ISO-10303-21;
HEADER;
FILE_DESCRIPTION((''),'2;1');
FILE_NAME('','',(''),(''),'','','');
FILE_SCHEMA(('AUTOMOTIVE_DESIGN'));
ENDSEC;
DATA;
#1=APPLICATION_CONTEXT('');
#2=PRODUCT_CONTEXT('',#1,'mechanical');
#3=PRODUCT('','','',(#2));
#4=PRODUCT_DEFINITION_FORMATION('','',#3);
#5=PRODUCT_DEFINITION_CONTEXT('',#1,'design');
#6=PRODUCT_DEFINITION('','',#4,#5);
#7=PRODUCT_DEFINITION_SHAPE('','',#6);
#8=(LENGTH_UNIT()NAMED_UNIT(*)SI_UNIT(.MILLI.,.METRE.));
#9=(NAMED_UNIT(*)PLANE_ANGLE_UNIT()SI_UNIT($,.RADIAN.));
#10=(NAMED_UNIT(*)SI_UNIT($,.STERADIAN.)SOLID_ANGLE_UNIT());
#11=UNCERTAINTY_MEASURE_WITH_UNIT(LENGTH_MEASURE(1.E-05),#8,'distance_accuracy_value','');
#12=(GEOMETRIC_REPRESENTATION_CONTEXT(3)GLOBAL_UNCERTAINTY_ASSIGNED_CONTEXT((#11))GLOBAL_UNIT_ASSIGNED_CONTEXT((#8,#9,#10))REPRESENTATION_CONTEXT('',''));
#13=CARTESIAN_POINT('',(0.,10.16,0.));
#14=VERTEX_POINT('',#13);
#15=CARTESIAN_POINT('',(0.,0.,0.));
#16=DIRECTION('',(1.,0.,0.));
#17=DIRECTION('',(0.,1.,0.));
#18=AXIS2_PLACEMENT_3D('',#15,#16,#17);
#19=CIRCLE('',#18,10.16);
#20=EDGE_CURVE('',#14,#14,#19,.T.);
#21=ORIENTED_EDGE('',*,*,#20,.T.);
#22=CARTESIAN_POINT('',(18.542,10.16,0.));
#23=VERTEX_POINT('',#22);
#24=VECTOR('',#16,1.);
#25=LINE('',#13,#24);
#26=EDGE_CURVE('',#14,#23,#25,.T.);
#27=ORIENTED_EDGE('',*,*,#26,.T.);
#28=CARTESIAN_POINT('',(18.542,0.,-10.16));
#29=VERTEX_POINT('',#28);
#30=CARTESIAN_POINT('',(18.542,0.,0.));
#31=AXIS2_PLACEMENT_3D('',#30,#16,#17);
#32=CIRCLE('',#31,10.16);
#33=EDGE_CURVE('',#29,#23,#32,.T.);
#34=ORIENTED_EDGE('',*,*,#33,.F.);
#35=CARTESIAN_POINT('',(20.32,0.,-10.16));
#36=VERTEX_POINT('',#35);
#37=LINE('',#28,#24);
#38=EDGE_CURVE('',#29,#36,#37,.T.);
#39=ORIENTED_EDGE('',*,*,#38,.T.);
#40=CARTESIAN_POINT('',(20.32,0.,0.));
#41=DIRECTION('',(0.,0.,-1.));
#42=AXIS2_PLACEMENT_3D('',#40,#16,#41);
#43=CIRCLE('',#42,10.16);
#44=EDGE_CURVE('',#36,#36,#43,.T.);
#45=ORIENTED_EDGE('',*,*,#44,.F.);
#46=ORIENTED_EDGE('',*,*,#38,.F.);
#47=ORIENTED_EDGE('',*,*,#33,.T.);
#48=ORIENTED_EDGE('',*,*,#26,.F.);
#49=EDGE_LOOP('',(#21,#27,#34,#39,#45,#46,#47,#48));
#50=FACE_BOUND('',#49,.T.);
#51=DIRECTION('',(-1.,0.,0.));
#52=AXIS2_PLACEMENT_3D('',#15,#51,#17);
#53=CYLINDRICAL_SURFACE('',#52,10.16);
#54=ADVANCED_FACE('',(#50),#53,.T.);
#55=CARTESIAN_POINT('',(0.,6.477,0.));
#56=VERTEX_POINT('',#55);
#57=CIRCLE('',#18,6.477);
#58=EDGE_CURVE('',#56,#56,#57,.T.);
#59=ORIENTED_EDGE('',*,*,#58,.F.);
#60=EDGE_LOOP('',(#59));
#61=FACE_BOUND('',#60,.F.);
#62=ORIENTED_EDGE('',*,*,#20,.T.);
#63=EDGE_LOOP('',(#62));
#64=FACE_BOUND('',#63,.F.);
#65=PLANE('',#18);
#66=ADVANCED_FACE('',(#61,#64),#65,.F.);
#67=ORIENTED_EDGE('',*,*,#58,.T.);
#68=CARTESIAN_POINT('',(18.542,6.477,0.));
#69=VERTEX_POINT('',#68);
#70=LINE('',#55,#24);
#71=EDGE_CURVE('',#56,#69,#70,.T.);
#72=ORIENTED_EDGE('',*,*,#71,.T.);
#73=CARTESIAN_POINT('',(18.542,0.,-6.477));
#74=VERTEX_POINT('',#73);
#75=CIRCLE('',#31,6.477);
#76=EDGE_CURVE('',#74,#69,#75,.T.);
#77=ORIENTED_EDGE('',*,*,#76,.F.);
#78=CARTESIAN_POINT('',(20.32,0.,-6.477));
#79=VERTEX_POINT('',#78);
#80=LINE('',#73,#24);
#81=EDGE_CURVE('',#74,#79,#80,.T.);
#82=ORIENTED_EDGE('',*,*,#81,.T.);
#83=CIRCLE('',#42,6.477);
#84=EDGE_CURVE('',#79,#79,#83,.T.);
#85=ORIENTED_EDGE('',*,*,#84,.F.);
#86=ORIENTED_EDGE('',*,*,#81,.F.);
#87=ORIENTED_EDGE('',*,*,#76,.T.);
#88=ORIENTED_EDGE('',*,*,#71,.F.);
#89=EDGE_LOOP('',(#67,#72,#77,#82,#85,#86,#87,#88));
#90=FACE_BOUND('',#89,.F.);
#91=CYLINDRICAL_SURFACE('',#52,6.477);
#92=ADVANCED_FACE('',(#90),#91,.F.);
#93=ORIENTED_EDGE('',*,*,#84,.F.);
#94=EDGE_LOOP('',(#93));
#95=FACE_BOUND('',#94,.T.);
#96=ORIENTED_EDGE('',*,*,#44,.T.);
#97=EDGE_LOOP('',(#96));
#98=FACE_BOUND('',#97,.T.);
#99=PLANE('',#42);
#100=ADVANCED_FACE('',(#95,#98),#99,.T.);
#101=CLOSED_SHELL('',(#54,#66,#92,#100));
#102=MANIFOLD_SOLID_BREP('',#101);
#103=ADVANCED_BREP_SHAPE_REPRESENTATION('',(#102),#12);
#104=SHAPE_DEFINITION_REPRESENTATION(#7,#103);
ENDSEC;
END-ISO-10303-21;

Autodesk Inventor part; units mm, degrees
ref_plane "YZ Plane" through (0, 0, 0) normal (1, 0, 0) x (0, 1, 0)
ref_plane "XZ Plane" through (0, 0, 0) normal (0, 1, 0) x (-1, 0, 0)
ref_plane "XY Plane" through (0, 0, 0) normal (0, 0, 1) x (1, 0, 0)
sketch "Sketch1" plane through (0, 0, 0) normal (1, 0, 0) x (0, 1, 0)
  circle A0 centre (0, 0) radius 6.477
  circle A1 centre (0, 0) radius 10.16
  dimension "d0" = 12.954
  dimension "d1" = 20.32
extrude "Extrusion1" add sketch "Sketch1" along normal blind 18.542
sketch "Sketch2" plane through (18.542, 0, 0) normal (1, 0, 0) x (0, 0, -1)
  circle A0 centre (0, 0) radius 10.16 projected
  circle A1 centre (0, 0) radius 6.477 projected
extrude "Extrusion2" add sketch "Sketch2" along normal blind 1.778
properties part number "CH-7(Diff Spacer2)"
